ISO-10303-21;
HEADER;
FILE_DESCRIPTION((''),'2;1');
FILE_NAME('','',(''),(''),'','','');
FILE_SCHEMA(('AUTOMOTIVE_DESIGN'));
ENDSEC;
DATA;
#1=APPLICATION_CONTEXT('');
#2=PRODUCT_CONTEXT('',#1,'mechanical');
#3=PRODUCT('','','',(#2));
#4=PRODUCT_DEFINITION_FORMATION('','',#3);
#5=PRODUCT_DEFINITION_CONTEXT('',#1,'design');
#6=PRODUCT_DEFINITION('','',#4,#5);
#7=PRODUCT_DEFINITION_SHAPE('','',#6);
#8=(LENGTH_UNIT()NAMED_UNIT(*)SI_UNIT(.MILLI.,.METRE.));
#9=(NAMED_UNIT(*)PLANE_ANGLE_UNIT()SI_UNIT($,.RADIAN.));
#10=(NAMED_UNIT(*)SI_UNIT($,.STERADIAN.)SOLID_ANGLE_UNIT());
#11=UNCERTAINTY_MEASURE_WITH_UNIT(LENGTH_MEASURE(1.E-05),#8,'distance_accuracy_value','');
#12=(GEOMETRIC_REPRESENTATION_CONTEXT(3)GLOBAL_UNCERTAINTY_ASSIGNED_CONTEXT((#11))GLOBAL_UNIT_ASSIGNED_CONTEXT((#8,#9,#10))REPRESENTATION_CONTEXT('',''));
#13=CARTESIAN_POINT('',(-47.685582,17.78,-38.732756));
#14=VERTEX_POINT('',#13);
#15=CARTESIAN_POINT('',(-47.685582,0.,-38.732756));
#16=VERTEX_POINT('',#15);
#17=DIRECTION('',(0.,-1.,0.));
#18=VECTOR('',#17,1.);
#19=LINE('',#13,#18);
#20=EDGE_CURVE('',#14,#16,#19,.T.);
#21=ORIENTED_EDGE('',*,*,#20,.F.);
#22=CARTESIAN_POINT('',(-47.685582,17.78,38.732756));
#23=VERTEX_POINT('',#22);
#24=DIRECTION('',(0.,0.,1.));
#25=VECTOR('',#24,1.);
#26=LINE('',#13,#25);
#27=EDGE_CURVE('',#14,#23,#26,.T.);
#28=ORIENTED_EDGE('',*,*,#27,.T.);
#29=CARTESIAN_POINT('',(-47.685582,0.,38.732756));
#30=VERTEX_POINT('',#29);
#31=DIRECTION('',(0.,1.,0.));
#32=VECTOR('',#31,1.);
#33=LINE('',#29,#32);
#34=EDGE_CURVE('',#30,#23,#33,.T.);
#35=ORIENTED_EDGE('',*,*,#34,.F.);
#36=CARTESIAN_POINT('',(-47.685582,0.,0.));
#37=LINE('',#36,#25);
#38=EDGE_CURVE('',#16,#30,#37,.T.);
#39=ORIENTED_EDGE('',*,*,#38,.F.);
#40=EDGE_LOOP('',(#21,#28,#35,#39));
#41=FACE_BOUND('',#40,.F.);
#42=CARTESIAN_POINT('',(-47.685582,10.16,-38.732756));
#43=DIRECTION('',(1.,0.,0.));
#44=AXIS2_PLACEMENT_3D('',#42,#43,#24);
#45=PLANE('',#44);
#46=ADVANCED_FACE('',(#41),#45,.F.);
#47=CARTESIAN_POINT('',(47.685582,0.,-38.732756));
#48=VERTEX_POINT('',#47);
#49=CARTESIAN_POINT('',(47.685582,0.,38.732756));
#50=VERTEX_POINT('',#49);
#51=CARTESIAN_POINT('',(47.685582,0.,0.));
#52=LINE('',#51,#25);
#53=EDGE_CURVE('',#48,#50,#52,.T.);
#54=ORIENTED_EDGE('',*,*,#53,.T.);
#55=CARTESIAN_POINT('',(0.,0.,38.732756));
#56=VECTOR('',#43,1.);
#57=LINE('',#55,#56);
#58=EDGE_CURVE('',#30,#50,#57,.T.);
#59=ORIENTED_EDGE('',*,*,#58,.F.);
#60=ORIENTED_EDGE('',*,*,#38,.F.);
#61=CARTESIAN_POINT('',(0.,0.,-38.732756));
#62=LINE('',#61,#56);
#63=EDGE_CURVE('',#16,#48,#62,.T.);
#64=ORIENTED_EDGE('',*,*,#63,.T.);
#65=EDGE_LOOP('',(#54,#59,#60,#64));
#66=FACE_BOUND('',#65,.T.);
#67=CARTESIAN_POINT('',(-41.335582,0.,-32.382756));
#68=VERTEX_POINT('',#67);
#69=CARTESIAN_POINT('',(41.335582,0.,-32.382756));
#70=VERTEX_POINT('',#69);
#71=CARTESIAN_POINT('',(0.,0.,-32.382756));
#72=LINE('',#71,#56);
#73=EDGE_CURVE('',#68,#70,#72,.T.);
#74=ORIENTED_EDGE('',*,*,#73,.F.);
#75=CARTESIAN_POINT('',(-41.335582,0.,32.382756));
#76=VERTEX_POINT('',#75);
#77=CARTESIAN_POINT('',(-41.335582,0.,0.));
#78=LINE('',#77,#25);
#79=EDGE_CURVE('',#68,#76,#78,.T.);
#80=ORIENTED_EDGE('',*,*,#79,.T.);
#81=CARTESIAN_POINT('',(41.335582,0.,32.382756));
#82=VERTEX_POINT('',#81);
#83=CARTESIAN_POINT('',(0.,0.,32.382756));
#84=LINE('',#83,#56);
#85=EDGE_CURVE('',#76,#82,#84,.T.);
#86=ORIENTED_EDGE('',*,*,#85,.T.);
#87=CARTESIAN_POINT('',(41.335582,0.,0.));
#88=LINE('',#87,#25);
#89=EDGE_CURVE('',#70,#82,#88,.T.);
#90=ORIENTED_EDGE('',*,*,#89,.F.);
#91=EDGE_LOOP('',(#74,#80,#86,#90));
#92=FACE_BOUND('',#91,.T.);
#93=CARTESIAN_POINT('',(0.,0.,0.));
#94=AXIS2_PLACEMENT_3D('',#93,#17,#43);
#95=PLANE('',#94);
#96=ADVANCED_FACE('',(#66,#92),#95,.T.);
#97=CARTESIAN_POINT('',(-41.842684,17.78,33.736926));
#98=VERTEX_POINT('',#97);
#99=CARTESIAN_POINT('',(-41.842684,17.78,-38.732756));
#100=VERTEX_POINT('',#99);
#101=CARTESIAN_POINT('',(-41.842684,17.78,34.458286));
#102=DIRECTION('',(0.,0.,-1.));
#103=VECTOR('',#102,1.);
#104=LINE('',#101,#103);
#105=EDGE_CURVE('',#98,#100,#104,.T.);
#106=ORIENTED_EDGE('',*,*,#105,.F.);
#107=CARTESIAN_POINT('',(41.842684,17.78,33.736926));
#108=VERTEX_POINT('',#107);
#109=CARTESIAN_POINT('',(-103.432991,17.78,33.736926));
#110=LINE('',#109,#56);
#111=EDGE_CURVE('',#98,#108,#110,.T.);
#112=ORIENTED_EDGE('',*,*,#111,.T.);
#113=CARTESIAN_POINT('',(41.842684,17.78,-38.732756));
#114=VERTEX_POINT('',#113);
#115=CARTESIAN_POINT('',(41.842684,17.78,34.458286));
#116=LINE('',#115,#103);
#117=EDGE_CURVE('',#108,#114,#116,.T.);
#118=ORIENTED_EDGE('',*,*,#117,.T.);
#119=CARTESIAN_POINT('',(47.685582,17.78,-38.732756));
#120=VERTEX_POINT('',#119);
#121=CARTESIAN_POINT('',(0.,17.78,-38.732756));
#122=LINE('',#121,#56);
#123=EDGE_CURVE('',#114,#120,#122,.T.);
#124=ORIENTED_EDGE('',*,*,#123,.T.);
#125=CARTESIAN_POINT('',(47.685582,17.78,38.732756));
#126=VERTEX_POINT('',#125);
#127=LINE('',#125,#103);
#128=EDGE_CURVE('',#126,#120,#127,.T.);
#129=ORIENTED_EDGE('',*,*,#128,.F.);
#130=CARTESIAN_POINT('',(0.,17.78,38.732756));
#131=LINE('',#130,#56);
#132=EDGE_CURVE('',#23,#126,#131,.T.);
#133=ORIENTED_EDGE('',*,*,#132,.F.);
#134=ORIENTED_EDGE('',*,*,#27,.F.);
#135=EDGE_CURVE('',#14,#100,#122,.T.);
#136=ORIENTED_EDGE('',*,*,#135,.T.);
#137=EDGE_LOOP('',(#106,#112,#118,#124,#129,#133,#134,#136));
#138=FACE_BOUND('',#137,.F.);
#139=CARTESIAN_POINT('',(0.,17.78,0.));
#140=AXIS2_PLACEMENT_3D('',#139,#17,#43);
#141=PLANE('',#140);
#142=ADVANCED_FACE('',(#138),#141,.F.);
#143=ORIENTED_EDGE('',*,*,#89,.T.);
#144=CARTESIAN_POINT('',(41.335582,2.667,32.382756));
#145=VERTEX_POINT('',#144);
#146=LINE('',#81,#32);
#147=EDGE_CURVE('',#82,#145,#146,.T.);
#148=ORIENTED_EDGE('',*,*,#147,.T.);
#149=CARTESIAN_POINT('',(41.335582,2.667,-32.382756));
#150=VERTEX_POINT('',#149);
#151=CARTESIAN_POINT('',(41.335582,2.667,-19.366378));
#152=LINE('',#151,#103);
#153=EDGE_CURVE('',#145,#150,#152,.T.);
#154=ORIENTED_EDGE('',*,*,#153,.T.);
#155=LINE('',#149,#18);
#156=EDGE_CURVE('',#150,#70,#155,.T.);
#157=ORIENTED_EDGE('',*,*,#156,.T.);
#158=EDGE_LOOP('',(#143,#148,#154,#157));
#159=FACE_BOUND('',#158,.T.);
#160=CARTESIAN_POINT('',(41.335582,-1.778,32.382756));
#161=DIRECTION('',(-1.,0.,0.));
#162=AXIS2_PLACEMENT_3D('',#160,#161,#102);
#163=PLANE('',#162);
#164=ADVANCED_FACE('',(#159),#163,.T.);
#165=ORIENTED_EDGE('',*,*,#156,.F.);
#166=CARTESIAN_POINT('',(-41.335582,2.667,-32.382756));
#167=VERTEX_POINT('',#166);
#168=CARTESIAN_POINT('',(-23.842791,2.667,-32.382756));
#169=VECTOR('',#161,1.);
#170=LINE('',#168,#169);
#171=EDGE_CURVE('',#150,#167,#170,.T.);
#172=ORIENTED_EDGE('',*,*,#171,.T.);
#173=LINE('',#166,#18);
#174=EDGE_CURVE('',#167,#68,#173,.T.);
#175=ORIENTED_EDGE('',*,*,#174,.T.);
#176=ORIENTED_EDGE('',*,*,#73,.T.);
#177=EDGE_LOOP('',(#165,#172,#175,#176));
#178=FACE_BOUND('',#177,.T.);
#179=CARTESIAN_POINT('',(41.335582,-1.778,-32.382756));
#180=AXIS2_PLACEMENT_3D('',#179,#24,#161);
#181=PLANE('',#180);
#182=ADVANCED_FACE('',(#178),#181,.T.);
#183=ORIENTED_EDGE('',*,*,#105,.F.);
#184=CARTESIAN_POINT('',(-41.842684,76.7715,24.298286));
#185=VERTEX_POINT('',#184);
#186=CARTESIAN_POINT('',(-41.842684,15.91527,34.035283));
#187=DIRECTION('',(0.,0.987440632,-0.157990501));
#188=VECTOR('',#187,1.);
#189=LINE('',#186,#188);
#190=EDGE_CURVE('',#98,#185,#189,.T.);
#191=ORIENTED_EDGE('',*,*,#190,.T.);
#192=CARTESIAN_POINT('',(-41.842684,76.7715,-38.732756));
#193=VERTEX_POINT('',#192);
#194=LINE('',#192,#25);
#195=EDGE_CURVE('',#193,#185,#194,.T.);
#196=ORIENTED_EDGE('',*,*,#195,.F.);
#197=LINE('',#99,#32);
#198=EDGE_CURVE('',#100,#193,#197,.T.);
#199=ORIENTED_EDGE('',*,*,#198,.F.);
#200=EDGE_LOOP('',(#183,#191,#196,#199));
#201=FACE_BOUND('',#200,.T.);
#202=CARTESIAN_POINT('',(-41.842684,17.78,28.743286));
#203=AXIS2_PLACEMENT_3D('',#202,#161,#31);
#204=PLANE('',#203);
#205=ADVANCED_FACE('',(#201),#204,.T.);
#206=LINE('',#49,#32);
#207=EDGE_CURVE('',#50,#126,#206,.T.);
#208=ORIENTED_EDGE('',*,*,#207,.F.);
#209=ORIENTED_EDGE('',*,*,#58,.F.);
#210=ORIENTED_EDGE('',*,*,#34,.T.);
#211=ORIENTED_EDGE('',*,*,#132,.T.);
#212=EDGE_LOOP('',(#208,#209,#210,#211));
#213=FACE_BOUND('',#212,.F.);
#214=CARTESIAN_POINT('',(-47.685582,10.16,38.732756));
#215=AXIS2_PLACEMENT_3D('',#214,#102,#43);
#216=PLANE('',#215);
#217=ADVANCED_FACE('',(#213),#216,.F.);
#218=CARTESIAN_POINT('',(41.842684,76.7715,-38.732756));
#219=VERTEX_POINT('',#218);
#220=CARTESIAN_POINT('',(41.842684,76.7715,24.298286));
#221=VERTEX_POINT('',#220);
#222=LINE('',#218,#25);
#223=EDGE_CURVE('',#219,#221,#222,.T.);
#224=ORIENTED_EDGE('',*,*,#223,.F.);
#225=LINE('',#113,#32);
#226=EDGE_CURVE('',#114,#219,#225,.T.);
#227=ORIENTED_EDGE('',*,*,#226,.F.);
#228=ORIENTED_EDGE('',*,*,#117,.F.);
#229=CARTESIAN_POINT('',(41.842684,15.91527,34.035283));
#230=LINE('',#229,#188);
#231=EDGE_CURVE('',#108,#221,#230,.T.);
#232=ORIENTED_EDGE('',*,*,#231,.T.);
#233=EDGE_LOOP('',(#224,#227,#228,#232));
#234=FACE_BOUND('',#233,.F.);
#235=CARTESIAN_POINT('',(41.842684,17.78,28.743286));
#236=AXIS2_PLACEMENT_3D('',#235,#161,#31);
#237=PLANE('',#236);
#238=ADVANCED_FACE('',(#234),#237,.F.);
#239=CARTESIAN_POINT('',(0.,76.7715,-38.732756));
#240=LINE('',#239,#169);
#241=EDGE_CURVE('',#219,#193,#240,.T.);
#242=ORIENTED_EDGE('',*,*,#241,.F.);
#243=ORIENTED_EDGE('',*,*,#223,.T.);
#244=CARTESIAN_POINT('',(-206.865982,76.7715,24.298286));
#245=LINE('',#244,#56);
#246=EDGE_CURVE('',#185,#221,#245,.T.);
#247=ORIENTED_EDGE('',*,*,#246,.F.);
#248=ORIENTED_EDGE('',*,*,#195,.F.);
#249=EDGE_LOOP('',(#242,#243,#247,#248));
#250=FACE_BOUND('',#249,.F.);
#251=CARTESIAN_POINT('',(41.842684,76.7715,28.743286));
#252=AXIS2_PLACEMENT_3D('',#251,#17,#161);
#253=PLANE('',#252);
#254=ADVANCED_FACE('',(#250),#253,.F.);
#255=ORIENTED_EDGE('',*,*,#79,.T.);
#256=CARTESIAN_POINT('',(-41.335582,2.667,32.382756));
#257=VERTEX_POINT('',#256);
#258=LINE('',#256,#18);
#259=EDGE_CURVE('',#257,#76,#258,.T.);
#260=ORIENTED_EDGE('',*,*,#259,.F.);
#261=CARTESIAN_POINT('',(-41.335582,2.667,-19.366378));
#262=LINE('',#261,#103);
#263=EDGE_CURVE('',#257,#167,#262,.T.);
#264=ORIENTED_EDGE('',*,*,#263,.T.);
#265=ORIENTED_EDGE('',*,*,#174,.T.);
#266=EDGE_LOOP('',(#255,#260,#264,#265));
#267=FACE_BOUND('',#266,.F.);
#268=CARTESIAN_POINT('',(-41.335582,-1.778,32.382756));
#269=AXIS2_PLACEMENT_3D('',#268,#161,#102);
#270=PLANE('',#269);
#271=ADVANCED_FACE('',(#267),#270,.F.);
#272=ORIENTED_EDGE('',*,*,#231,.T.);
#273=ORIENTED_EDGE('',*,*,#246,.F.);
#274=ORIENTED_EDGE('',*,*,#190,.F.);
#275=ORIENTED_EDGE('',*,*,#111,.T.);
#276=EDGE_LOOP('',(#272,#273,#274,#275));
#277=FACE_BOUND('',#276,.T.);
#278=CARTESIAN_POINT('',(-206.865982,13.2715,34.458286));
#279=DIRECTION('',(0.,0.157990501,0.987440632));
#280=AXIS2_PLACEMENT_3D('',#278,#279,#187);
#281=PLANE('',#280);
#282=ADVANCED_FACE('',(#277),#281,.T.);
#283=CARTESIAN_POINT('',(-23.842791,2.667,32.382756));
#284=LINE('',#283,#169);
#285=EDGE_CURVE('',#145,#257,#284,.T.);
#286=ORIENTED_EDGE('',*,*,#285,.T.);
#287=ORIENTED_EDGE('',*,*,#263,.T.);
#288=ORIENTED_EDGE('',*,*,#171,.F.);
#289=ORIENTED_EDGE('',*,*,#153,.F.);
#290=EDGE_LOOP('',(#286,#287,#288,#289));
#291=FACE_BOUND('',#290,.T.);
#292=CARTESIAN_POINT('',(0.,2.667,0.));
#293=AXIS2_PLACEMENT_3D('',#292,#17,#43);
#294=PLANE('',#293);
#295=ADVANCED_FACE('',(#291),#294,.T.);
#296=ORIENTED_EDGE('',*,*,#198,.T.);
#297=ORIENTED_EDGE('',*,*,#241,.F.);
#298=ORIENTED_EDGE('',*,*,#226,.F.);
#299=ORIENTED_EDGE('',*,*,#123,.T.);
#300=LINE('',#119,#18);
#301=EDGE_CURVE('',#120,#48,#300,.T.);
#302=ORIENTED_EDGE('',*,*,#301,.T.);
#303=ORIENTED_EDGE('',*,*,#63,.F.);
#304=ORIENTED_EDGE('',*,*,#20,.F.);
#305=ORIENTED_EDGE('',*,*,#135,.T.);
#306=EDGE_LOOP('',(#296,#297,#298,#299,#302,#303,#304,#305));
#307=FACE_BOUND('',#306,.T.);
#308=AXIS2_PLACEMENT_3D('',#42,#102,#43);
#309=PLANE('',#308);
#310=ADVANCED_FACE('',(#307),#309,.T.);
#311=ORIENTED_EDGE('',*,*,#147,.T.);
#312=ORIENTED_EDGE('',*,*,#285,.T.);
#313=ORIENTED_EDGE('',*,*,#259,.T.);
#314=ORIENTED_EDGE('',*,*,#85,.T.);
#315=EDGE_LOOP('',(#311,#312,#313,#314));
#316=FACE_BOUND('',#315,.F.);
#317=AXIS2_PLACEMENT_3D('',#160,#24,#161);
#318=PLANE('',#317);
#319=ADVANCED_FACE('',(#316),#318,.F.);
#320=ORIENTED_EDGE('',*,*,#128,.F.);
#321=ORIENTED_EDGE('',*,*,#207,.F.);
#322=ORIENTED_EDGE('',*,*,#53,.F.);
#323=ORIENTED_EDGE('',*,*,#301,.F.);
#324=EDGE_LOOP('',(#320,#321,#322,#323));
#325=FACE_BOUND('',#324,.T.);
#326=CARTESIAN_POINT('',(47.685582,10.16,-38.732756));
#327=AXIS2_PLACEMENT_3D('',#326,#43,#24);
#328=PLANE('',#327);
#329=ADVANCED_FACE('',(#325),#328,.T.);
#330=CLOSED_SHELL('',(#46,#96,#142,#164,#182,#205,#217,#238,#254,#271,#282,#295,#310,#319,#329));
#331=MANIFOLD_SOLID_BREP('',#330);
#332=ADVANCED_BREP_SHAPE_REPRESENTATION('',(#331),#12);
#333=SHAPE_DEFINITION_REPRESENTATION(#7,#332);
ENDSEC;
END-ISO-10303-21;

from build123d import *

# Parameters (mm, degrees)
F0_W         = 95.3711643815
F0_H         = 77.4655118585
F1_DEPTH     = 10.16
F2_T         = -6.35
F3_DEPTH     = 5.588
F4_DEPTH     = 3.8735
F5_DEPTH     = 0.5715
F6_DEPTH     = 7.62
F7_W         = 83.6853682995
F7_H         = 57.4865713716
F7_H_2       = 9.9894702435
F8_DEPTH     = 58.9915
F9_DEPTH     = 5.715
F10_T4_DEPTH = 413.7319634586


# Not quite as in the source:
# - a fillet or chamfer that OpenCascade refuses, or shapes differently, is made with other operations: its cross-section is extruded or revolved along the edge and cut away or added


with BuildPart() as f1:
    # F0 (on Front) → F1 (new body)
    with BuildSketch(Plane.XZ):
        Rectangle(F0_W, F0_H)
    extrude(amount=-F1_DEPTH)

    # F2
    f2_openings = [f1.faces().sort_by_distance(p)[0] for p in [
        (0, 0, 0),
    ]]
    offset(amount=F2_T, openings=f2_openings)

    # F3 (add): a face of the model
    f3_faces = [f1.faces().sort_by_distance(p)[0] for p in [
        (0, 3.81, 0),
    ]]
    extrude(f3_faces, amount=F3_DEPTH)

    # F4 (cut): a face of the model
    f4_faces = [f1.faces().sort_by_distance(p)[0] for p in [
        (0, -1.778, 0),
    ]]
    extrude(f4_faces, amount=-F4_DEPTH, mode=Mode.SUBTRACT)

    # F5 (cut): a face of the model
    f5_faces = [f1.faces().sort_by_distance(p)[0] for p in [
        (0, 2.0955, 0),
    ]]
    extrude(f5_faces, amount=-F5_DEPTH, mode=Mode.SUBTRACT)

    # F6 (add): a face of the model
    f6_faces = [f1.faces().sort_by_distance(p)[0] for p in [
        (0, 10.16, 0),
    ]]
    extrude(f6_faces, amount=F6_DEPTH)

    # F7 (on face) → F8 (join)
    with BuildSketch(Plane(origin=(0, 17.78, 0), x_dir=(-1, 0, 0), z_dir=(0, 1, 0))):
        Rectangle(F7_W, F7_H)
        with Locations((0, -33.7380208075)):
            Rectangle(F7_W, F7_H_2)
    extrude(amount=F8_DEPTH)

    # F9 (add): a face of the model
    f9_faces = [f1.faces().sort_by_distance(p)[0] for p in [
        (0, 47.27575, 28.7432856858),
    ]]
    extrude(f9_faces, amount=F9_DEPTH)

    # F10: chamfer of 63.5 x 10.16 on 1 edges, made by hand


with BuildPart() as f10_tool2:
    # F10_s3 → F10_t4 (new body)
    with BuildSketch(Plane.YZ.offset(-206.8659817293)):
        Polygon((13.2715, 34.4582856858), (76.7715, 24.2982856858), (76.7715, 34.4582856858), align=None)
    extrude(amount=F10_T4_DEPTH)

    split(bisect_by=Plane.XZ.offset(-17.78), keep=Keep.BOTTOM)


with BuildPart() as f1_1:
    add(f1.part)

    # F10_t1: cut F10_tool2
    add(f10_tool2.part, mode=Mode.SUBTRACT)


solid = f1_1.part
